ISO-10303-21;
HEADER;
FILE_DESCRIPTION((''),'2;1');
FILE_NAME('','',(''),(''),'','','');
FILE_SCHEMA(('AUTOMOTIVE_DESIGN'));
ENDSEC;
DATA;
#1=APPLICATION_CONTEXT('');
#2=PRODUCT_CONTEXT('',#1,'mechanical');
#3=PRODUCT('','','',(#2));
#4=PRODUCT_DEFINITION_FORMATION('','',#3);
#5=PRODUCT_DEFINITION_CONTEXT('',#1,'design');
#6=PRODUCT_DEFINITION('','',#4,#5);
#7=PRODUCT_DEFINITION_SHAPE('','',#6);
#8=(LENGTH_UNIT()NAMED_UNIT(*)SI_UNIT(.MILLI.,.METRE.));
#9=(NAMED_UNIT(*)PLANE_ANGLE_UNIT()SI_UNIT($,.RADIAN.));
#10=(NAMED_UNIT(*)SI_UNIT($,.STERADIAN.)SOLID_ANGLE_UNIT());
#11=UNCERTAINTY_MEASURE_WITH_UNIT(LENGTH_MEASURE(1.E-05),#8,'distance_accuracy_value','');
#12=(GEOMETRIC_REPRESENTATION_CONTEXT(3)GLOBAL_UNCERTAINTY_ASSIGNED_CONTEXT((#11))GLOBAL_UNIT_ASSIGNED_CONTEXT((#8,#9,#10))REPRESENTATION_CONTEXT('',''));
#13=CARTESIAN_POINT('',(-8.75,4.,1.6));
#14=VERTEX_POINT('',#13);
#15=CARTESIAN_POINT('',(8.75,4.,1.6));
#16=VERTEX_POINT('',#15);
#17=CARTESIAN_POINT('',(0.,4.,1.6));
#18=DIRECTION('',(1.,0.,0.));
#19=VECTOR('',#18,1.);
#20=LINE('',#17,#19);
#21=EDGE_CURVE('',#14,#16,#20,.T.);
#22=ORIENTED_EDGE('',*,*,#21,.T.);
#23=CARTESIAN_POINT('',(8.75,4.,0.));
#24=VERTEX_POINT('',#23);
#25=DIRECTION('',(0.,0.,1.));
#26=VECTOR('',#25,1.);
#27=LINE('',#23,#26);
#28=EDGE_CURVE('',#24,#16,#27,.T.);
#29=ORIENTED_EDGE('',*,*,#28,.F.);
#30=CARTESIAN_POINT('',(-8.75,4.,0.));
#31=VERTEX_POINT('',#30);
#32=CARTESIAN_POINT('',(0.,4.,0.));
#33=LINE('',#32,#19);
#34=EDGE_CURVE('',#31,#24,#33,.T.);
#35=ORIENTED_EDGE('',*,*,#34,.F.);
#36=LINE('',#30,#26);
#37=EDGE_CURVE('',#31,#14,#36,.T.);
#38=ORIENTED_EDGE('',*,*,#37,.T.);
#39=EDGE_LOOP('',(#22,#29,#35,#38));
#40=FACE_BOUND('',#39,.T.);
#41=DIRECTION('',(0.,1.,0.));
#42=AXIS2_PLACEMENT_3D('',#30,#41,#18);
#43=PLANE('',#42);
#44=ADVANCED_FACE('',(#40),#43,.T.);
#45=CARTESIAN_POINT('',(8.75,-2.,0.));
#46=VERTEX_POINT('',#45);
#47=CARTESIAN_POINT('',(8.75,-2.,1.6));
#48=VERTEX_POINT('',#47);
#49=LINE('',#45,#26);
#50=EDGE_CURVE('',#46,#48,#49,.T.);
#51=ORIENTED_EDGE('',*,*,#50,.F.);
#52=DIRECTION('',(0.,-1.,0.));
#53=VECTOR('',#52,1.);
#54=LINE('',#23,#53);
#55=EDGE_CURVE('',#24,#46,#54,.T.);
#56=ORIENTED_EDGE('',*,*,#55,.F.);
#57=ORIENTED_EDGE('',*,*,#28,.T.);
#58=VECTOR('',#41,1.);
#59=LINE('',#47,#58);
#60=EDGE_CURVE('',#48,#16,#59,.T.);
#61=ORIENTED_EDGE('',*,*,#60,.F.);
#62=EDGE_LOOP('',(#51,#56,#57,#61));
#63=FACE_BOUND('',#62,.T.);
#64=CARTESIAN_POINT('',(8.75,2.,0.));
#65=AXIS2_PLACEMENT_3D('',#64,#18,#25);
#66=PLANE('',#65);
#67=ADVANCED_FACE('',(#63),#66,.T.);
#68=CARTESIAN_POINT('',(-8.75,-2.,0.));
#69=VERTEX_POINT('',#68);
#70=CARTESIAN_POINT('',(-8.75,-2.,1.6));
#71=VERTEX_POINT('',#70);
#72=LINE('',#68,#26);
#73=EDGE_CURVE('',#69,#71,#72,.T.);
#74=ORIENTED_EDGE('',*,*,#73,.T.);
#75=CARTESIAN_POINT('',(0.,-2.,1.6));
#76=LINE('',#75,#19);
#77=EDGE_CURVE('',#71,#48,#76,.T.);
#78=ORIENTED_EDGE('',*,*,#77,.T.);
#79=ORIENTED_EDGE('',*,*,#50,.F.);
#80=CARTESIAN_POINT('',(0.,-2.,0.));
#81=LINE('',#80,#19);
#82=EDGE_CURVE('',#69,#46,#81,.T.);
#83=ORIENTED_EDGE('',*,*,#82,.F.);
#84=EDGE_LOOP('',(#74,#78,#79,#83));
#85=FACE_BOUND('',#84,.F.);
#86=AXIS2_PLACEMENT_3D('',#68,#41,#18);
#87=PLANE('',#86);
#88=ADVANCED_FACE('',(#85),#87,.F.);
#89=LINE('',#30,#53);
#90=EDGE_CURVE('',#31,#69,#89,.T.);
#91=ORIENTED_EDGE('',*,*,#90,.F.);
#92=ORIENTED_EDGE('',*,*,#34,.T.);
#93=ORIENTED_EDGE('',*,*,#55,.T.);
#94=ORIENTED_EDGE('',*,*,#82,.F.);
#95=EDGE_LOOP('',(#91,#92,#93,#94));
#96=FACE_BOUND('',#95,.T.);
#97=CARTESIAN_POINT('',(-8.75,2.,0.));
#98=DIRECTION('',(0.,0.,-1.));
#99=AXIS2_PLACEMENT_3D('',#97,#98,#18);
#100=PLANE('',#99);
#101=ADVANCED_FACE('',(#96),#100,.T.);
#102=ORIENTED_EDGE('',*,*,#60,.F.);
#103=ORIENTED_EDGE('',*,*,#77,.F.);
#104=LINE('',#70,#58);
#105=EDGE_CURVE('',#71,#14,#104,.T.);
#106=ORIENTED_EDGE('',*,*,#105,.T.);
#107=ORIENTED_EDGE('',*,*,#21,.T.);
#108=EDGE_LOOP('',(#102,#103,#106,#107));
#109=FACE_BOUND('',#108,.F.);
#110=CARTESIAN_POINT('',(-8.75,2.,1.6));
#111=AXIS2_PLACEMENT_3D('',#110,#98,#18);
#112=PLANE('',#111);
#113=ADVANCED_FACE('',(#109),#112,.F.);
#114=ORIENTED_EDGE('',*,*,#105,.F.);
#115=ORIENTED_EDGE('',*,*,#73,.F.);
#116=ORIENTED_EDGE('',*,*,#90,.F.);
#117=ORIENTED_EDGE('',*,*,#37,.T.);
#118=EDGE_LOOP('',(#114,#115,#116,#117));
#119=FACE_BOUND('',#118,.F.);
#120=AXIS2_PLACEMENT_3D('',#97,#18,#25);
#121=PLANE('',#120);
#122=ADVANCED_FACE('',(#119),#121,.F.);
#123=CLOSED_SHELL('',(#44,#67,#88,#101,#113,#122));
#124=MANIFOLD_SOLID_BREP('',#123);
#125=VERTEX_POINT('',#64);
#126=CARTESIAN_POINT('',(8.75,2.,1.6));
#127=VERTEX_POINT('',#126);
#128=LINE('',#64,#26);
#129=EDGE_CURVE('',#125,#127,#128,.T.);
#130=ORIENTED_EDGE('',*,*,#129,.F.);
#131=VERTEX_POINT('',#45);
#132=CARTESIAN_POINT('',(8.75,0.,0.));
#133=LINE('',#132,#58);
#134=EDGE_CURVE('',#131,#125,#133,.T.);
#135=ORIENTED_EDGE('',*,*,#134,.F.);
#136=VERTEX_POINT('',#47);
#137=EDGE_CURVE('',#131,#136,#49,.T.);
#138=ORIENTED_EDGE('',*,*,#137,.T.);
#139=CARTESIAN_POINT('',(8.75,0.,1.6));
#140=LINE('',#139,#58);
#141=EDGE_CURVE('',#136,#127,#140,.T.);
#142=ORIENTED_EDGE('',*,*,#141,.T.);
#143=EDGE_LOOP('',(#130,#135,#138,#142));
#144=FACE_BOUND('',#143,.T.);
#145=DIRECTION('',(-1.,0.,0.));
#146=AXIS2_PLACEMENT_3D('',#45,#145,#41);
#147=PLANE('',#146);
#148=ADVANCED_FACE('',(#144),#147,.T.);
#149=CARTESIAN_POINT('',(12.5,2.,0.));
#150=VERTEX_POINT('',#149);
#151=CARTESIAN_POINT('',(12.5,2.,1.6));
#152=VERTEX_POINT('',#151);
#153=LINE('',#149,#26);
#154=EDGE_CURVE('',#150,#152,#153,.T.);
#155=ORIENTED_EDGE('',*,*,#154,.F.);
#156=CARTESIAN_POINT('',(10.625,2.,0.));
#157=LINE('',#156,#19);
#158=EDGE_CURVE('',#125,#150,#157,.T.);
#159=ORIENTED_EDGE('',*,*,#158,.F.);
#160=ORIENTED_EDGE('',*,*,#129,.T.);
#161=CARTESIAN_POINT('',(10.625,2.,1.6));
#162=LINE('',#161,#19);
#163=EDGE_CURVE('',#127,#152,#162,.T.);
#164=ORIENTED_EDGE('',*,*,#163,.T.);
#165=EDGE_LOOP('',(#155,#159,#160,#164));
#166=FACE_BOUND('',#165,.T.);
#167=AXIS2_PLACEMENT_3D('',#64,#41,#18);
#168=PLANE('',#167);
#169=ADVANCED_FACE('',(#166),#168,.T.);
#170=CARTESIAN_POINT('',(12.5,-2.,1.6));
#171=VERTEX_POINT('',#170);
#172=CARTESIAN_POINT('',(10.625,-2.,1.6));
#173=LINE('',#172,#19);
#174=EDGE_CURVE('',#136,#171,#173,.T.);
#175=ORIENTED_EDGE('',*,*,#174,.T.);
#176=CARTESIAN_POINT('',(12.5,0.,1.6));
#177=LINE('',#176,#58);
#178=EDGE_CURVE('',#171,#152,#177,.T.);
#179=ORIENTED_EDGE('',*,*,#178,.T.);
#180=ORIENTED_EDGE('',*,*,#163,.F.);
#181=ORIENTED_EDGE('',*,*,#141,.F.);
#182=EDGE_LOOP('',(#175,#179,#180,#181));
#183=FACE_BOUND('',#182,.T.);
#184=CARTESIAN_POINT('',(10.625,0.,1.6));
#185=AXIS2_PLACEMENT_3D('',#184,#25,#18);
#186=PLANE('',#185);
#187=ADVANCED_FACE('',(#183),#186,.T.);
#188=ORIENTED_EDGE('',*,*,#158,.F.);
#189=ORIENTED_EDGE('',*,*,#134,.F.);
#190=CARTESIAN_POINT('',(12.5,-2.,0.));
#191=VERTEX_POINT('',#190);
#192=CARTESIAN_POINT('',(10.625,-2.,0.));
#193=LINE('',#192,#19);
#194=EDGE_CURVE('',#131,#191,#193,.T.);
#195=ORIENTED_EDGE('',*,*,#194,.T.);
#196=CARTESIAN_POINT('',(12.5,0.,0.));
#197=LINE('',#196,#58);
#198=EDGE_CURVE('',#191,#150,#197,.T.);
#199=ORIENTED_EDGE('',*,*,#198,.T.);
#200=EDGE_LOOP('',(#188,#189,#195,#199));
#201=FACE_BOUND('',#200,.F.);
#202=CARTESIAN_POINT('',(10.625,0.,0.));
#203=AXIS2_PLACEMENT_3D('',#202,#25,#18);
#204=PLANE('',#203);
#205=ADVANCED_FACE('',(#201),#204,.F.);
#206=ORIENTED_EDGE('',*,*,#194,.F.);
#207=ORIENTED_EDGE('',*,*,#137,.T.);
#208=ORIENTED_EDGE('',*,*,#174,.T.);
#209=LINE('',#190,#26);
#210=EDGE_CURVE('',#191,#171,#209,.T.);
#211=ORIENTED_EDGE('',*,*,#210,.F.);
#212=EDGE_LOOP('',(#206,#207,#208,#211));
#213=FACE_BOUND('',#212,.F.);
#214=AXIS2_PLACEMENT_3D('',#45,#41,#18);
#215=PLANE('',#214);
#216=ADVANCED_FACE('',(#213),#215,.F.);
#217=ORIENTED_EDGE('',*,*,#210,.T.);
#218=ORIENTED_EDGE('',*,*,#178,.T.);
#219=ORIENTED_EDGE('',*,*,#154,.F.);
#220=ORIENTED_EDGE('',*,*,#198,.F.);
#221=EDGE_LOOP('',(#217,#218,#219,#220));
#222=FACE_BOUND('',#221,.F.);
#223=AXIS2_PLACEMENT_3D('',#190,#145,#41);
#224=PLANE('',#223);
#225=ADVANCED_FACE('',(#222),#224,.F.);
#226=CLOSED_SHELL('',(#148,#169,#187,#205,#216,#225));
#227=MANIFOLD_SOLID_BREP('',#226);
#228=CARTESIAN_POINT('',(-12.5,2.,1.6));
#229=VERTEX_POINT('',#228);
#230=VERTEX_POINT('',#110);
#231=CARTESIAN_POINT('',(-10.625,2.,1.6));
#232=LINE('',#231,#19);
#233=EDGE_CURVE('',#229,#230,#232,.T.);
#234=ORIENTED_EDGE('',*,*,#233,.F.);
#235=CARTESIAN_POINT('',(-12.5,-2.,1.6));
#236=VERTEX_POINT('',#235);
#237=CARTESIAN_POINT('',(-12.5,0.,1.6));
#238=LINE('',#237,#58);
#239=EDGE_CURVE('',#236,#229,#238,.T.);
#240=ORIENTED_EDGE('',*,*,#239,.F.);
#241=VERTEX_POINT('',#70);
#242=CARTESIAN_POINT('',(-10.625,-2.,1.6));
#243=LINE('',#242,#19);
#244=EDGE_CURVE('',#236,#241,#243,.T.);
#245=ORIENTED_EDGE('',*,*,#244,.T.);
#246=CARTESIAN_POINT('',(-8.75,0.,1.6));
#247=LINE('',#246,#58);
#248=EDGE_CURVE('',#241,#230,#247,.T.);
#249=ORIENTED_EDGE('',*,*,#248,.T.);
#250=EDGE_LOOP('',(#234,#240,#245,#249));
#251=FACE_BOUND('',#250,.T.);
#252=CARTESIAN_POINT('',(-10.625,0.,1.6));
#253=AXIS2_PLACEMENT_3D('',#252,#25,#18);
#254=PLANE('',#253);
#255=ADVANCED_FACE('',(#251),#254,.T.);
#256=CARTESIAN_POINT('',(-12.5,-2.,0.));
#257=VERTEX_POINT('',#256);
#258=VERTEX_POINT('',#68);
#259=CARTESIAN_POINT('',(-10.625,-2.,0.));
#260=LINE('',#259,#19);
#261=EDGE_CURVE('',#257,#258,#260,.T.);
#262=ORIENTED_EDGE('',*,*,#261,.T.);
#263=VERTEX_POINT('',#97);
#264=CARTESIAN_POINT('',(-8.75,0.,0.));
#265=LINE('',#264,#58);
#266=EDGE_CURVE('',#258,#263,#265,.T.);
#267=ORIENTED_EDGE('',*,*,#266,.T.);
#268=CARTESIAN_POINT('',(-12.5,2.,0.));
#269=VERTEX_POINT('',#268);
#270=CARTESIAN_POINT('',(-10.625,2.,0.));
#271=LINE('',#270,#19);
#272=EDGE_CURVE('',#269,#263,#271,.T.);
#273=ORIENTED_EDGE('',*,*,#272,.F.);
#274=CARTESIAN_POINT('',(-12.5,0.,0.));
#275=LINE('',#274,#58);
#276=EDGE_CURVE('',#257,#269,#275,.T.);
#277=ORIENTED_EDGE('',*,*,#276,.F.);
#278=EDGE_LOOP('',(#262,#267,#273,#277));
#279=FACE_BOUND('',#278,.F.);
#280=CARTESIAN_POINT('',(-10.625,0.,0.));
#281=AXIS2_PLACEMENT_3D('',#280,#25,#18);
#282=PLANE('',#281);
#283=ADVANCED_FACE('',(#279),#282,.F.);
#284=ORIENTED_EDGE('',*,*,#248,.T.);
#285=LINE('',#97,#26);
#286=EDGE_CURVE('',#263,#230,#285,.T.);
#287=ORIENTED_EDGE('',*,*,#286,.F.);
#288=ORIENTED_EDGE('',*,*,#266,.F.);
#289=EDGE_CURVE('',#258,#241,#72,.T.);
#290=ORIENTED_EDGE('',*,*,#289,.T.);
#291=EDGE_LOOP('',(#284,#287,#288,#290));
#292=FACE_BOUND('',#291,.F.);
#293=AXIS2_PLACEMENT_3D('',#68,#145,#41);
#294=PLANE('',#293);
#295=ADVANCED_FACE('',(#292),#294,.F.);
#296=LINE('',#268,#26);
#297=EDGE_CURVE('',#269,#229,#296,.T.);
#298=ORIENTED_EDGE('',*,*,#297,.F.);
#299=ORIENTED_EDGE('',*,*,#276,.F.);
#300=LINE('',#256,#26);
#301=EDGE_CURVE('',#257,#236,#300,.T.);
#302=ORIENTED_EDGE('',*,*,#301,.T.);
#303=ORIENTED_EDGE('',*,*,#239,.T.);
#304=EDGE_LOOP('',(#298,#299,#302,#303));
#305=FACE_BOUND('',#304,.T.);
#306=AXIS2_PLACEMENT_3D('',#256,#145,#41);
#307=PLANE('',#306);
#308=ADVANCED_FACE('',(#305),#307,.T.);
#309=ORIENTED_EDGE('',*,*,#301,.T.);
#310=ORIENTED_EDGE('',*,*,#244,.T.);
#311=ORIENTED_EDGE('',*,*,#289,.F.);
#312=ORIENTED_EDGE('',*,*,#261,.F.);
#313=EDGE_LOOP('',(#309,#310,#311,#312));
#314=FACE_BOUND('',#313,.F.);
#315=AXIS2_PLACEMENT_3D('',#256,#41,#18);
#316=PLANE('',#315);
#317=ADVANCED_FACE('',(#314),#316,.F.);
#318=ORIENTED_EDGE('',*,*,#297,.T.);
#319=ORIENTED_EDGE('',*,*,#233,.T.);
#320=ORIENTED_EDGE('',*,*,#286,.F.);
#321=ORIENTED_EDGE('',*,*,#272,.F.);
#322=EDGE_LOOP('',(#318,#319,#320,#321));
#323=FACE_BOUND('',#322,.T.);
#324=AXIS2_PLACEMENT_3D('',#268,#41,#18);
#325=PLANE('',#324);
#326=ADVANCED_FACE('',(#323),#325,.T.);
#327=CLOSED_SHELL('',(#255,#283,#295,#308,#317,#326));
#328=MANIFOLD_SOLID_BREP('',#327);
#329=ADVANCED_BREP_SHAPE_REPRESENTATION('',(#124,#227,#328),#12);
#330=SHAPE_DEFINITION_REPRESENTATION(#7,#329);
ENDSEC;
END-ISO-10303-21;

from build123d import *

# Parameters (mm, degrees)
F0_W     = 17.5
F0_H     = 4
F1_DEPTH = 1.6
F0_W_2   = 3.75
F2_DEPTH = 1.6
F3_DEPTH = 2


with BuildPart() as f1:
    # F0 (on Top) → F1 (new body)
    with BuildSketch(Plane.XY):
        Rectangle(F0_W, F0_H)
    extrude(amount=F1_DEPTH)

    # F3 (add): a face of the model
    f3_faces = [f1.faces().sort_by_distance(p)[0] for p in [
        (0, 2, 0.8),
    ]]
    extrude(f3_faces, amount=F3_DEPTH)


with BuildPart() as f2:
    # F0 (on Top) → F2 (new body, through all)
    with BuildSketch(Plane.XY):
        with Locations((-10.625, 0)):
            Rectangle(F0_W_2, F0_H)
    extrude(amount=F2_DEPTH)


with BuildPart() as f2b:
    # F0 (on Top) → F2, piece 2 (new body, through all)
    with BuildSketch(Plane.XY):
        with Locations((10.625, 0)):
            Rectangle(F0_W_2, F0_H)
    extrude(amount=F2_DEPTH)


solid = Compound([f1.part, f2.part, f2b.part])
